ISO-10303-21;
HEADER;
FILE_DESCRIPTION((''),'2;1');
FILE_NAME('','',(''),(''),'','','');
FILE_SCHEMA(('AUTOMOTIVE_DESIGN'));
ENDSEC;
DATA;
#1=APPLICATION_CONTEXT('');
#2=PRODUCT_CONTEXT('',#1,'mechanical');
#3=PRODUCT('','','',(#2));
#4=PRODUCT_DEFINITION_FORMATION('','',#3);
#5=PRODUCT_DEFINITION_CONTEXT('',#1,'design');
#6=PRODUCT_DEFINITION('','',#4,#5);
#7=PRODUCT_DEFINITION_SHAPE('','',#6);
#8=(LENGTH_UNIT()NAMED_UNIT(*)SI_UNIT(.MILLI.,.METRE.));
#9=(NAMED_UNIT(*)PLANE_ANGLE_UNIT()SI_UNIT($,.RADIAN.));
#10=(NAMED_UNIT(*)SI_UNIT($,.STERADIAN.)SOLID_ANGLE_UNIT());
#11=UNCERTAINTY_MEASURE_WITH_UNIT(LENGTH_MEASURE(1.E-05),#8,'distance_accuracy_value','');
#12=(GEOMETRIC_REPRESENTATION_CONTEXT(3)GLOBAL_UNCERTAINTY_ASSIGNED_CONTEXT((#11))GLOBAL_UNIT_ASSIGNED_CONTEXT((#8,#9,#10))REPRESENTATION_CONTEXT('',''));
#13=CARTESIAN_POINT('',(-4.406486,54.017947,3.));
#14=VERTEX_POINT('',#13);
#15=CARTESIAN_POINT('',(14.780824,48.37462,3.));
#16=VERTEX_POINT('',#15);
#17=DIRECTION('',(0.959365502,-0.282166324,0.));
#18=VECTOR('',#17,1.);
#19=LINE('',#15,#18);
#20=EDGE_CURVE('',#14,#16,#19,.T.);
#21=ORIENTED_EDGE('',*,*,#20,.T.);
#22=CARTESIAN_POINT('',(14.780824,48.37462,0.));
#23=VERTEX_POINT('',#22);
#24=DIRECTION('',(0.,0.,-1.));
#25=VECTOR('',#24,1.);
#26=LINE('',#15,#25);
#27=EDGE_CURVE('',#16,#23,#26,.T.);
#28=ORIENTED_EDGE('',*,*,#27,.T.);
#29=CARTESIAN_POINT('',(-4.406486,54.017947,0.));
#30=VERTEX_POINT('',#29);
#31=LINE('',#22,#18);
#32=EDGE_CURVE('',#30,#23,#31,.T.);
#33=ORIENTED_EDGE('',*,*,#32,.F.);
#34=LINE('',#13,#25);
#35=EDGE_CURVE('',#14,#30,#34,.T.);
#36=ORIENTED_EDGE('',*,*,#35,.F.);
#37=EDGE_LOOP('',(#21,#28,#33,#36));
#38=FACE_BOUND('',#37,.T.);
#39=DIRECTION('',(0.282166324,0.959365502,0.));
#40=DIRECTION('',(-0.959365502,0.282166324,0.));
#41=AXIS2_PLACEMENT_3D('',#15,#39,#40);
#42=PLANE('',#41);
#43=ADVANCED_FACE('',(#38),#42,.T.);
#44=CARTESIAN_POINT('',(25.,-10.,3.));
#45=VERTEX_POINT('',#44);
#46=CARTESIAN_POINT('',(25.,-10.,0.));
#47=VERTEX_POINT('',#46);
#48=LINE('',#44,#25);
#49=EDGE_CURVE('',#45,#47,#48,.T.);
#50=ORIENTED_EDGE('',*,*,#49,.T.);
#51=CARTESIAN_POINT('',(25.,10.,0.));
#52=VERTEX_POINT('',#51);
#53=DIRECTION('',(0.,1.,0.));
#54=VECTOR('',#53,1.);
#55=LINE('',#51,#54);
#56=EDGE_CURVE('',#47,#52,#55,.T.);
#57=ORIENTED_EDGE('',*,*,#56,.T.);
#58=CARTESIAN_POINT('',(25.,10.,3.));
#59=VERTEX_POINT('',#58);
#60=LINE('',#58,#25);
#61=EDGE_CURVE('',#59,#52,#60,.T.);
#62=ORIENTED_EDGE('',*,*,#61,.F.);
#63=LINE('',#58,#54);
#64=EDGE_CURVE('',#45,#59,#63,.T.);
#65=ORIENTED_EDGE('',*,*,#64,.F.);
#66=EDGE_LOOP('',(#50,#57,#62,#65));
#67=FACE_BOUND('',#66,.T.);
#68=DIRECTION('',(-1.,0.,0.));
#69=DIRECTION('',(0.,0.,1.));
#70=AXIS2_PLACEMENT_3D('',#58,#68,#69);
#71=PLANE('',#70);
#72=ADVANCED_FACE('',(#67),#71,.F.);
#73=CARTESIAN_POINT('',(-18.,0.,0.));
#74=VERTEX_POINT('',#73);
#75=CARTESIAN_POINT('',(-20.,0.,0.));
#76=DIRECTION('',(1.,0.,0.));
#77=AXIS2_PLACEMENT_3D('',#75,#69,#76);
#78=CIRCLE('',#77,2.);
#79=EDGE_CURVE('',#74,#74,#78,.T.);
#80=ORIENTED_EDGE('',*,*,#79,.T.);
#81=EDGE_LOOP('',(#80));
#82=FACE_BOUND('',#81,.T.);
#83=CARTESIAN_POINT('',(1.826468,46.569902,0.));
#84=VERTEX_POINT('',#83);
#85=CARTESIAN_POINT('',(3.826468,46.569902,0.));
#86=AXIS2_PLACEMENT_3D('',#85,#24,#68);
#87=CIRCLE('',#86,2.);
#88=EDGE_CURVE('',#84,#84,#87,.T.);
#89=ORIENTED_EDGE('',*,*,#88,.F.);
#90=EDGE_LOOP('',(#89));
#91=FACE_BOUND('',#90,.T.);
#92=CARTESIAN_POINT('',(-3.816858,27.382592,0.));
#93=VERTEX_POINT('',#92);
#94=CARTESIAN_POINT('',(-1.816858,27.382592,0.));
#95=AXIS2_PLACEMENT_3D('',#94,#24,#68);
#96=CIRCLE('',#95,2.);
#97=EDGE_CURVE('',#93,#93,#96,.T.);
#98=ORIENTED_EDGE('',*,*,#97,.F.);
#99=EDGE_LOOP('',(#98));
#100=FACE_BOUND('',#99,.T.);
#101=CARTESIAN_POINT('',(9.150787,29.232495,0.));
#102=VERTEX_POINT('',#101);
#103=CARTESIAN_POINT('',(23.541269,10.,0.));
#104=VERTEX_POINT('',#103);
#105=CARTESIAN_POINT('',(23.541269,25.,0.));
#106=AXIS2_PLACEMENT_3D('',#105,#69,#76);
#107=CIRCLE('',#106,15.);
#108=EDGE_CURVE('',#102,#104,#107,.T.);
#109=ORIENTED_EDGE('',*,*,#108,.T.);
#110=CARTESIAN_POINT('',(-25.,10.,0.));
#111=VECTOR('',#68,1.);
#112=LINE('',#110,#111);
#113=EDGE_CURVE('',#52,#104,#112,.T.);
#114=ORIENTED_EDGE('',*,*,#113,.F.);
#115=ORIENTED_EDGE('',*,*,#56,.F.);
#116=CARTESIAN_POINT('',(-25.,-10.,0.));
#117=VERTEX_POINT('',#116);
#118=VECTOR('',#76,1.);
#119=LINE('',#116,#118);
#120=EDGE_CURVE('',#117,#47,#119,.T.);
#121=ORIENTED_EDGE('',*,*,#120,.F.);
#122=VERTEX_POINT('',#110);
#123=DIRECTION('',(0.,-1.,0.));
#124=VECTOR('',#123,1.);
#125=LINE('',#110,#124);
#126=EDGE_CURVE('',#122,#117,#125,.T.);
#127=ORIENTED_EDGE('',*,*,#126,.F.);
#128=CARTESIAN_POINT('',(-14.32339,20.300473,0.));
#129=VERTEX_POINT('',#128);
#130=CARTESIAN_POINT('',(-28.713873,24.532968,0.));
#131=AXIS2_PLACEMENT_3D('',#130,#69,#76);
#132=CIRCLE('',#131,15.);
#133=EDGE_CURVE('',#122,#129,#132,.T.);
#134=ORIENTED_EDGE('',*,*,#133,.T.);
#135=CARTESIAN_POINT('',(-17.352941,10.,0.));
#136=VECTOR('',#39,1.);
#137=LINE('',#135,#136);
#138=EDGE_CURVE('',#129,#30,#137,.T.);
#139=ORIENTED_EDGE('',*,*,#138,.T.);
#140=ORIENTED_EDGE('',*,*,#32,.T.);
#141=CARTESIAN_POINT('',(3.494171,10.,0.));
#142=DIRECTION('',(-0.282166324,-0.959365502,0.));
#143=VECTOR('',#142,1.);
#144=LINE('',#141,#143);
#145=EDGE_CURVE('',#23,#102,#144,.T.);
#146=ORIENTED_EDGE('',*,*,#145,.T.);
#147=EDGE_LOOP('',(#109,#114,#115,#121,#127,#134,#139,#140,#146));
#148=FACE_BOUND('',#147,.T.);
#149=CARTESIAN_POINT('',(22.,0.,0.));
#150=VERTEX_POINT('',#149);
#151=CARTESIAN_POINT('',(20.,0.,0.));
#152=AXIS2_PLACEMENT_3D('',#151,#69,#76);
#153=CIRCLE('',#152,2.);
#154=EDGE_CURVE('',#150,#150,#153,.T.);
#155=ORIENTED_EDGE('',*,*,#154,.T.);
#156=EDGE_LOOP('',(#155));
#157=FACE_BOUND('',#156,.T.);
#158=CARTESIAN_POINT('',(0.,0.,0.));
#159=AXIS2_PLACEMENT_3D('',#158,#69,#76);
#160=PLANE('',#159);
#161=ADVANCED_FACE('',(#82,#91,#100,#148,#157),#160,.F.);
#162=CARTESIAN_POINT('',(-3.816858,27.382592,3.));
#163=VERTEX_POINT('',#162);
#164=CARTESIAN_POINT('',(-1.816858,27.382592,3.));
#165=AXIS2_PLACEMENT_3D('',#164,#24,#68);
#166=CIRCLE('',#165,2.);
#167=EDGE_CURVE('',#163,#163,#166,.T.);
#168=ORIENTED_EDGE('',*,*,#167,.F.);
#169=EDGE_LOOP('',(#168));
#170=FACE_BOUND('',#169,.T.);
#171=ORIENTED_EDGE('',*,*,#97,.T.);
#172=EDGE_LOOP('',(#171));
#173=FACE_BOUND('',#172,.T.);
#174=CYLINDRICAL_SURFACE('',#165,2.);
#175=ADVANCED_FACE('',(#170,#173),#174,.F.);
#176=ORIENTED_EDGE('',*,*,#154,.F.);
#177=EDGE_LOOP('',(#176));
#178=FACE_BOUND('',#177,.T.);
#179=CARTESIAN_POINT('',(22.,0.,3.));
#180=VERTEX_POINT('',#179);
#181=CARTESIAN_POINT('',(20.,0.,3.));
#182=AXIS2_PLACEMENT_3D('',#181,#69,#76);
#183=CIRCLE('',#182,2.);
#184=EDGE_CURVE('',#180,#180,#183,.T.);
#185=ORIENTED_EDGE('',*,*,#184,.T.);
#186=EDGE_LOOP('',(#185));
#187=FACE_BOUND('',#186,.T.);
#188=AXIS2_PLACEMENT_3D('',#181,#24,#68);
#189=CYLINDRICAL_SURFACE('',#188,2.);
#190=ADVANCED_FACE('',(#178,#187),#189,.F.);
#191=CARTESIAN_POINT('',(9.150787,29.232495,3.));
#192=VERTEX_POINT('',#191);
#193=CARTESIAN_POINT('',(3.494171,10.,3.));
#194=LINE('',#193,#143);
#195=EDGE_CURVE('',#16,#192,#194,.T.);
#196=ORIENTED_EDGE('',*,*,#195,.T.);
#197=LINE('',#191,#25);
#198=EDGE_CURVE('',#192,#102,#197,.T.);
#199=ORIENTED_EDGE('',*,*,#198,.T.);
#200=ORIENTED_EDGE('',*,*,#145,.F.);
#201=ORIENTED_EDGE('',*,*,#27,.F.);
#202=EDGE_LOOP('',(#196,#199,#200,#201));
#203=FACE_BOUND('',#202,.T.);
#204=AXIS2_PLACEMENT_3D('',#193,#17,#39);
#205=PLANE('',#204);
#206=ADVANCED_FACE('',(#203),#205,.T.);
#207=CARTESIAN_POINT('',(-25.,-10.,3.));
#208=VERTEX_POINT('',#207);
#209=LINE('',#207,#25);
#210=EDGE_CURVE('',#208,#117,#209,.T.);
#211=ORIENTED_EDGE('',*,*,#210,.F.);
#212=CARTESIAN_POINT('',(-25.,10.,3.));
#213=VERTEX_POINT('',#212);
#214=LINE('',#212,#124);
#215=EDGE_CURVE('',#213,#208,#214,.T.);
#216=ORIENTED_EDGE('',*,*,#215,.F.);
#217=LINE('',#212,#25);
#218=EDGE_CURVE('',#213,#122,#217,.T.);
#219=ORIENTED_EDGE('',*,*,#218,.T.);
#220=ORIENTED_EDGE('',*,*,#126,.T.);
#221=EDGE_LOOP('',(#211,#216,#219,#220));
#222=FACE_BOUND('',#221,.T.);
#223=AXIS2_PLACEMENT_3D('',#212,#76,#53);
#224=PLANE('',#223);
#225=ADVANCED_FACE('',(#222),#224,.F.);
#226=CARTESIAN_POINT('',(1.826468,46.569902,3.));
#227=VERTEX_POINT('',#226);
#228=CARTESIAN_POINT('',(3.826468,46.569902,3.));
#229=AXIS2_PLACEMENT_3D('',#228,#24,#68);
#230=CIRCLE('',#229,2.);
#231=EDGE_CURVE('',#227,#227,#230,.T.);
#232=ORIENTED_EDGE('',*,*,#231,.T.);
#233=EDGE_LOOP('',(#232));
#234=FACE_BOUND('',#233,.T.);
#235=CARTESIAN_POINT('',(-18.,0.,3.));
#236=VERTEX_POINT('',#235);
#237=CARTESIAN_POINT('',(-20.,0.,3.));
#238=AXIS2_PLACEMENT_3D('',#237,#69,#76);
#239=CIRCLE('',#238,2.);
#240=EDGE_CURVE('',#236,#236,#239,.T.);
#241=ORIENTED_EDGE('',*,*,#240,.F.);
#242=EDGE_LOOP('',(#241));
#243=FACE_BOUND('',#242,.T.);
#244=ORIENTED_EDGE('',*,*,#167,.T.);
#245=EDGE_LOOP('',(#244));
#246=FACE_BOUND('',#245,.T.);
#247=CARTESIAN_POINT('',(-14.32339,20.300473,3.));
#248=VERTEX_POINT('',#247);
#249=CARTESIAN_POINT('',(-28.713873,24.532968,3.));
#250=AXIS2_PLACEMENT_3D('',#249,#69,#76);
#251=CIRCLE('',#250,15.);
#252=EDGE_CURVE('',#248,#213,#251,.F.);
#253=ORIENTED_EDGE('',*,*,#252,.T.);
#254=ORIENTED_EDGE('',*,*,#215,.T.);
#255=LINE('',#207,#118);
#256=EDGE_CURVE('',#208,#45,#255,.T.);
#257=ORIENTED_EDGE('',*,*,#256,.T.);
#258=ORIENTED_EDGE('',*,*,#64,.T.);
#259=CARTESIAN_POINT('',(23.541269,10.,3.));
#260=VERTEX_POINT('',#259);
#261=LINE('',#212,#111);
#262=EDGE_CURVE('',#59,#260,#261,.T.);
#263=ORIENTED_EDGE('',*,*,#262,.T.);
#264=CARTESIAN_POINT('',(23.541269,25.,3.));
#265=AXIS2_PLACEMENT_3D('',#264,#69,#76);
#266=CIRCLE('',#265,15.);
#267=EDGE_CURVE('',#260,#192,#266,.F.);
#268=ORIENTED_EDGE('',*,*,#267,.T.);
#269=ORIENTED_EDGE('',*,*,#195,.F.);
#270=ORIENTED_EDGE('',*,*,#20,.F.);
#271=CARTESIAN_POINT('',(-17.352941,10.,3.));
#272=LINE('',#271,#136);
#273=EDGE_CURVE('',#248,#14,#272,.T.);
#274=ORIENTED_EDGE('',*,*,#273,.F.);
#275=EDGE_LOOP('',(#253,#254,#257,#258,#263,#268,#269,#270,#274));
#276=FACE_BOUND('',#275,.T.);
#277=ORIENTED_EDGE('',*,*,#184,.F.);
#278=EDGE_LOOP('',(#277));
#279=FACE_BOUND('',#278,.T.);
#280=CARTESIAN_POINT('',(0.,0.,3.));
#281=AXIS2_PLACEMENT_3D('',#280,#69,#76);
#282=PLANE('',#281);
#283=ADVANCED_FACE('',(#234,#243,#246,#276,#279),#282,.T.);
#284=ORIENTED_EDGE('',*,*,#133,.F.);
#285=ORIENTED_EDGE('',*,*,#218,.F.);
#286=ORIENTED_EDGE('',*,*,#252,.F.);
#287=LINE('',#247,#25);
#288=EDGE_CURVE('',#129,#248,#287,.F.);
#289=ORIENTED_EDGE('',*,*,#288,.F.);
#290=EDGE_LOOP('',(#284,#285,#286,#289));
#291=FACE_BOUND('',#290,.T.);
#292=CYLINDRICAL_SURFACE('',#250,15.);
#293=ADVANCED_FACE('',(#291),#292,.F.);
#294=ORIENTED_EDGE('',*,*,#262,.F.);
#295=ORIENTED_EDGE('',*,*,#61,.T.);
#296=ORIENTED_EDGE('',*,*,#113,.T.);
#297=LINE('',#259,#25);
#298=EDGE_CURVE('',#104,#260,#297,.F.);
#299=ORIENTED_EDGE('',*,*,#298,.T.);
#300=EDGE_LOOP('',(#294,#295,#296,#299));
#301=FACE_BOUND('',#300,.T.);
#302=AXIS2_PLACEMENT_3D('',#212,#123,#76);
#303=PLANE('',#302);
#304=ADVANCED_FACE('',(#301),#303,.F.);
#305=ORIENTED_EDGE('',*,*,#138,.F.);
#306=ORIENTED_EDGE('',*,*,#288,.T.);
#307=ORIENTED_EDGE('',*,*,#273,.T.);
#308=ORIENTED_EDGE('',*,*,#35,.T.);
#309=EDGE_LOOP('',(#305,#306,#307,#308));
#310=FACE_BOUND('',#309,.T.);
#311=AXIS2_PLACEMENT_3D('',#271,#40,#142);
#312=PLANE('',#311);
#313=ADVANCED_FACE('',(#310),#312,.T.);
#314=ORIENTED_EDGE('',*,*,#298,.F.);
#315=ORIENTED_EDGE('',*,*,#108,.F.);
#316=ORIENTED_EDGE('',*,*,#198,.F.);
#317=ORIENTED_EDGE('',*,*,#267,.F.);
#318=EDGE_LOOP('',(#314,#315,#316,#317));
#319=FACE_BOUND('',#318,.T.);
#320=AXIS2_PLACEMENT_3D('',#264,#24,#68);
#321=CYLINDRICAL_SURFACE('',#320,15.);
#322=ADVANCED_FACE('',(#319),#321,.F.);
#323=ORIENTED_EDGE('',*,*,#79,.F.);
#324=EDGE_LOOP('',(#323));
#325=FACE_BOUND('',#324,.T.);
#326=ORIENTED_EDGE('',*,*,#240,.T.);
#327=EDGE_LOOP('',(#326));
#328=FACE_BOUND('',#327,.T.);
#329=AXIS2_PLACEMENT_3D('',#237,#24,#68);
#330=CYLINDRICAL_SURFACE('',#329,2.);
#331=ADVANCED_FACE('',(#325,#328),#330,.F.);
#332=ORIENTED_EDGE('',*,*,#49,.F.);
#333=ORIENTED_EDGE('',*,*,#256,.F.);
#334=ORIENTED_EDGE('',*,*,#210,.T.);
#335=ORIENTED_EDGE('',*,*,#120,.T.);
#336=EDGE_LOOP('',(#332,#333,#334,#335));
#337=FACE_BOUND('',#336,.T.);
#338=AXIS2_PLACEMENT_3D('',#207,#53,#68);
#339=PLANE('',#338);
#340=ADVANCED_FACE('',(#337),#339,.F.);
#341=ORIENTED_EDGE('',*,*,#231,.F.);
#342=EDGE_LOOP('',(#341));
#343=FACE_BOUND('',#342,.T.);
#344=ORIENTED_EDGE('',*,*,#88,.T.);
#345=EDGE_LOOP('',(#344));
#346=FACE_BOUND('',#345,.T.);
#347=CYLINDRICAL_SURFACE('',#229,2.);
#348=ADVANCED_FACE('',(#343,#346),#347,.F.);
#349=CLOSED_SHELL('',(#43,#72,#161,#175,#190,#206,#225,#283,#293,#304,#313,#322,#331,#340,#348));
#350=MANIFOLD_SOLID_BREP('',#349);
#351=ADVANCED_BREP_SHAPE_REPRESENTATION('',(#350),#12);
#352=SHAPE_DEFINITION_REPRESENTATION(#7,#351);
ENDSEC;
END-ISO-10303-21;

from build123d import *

# Parameters (mm, degrees)
SKETCH_1_W      = 50
SKETCH_1_H      = 20
SKETCH_1_R      = 2
EXTRUDE_1_DEPTH = 3
SKETCH_2_R      = 2
EXTRUDE_2_DEPTH = 3
FILLET_1_R      = 15


with BuildPart() as part:
    # 草图1 → 凸台-拉伸1 (new body)
    with BuildSketch(Plane.XY):
        Rectangle(SKETCH_1_W, SKETCH_1_H)
        with Locations((20, 0)):
            Circle(SKETCH_1_R, mode=Mode.SUBTRACT)
        with Locations((-20, 0)):
            Circle(SKETCH_1_R, mode=Mode.SUBTRACT)
    extrude(amount=EXTRUDE_1_DEPTH)

    # 草图2 → 凸台-拉伸2 (add)
    with BuildSketch(Plane(origin=(0, 0, 0), x_dir=(-1, 0, 0), z_dir=(0, 0, -1))):
        Polygon((-3.494170761, 10), (-14.78082372, 48.374620063), (4.406486311, 54.017946543), (17.352941176, 10), align=None)
        with Locations((-3.826468347, 46.569902088)):
            Circle(SKETCH_2_R, mode=Mode.SUBTRACT)
        with Locations((1.816858133, 27.382592056)):
            Circle(SKETCH_2_R, mode=Mode.SUBTRACT)
    extrude(amount=-EXTRUDE_2_DEPTH)

    # 圆角1
    # the kernel refuses this fillet: 15 mm, written as the material it adds along each edge
    with BuildSketch(Plane(origin=(-17.352941176, 10, 0), x_dir=(-1, 0, 0), z_dir=(0, 0, 1))) as fillet_1_piece_1:
        with BuildLine():
            CenterArc((11.360931708, -14.532967632), FILLET_1_R, 104.335036725, 59.275422941)
            Line((-3.029550815, -10.300472772), (-3.317360466, -10.215822875))
            Line((-3.317360466, -10.215822875), (-0.28780965, 0.084649897))
            Line((-0.28780965, 0.084649897), (0, 0.3))
            ThreePointArc((0, 0.3), (3.823529412, 0.3), (7.572781366, 0.290659353))
            Line((7.572781366, 0.290659353), (7.647058824, 0))
        make_face()
    extrude(amount=3)
    with BuildSketch(Plane(origin=(3.494170761, 10, 0), x_dir=(1, 0, 0), z_dir=(0, 0, 1))) as fillet_1_piece_2:
        with BuildLine():
            CenterArc((FILLET_1_R * 1.33647324392, FILLET_1_R), FILLET_1_R, 163.610459666, 106.389540334)
            Line((FILLET_1_R * 0.37710774235, FILLET_1_R * 1.28216632399), (FILLET_1_R * 0.357920432319, FILLET_1_R * 1.28780965047))
            Line((FILLET_1_R * 0.357920432319, FILLET_1_R * 1.28780965047), (-FILLET_1_R * 0.0267294648784, -FILLET_1_R * 0.02))
            Line((-FILLET_1_R * 0.0267294648784, -FILLET_1_R * 0.02), (FILLET_1_R * 1.33647324392, -FILLET_1_R * 0.02))
            Line((FILLET_1_R * 1.33647324392, -FILLET_1_R * 0.02), (FILLET_1_R * 1.33647324392, 0))
        make_face()
    extrude(amount=3)


solid = part.part
